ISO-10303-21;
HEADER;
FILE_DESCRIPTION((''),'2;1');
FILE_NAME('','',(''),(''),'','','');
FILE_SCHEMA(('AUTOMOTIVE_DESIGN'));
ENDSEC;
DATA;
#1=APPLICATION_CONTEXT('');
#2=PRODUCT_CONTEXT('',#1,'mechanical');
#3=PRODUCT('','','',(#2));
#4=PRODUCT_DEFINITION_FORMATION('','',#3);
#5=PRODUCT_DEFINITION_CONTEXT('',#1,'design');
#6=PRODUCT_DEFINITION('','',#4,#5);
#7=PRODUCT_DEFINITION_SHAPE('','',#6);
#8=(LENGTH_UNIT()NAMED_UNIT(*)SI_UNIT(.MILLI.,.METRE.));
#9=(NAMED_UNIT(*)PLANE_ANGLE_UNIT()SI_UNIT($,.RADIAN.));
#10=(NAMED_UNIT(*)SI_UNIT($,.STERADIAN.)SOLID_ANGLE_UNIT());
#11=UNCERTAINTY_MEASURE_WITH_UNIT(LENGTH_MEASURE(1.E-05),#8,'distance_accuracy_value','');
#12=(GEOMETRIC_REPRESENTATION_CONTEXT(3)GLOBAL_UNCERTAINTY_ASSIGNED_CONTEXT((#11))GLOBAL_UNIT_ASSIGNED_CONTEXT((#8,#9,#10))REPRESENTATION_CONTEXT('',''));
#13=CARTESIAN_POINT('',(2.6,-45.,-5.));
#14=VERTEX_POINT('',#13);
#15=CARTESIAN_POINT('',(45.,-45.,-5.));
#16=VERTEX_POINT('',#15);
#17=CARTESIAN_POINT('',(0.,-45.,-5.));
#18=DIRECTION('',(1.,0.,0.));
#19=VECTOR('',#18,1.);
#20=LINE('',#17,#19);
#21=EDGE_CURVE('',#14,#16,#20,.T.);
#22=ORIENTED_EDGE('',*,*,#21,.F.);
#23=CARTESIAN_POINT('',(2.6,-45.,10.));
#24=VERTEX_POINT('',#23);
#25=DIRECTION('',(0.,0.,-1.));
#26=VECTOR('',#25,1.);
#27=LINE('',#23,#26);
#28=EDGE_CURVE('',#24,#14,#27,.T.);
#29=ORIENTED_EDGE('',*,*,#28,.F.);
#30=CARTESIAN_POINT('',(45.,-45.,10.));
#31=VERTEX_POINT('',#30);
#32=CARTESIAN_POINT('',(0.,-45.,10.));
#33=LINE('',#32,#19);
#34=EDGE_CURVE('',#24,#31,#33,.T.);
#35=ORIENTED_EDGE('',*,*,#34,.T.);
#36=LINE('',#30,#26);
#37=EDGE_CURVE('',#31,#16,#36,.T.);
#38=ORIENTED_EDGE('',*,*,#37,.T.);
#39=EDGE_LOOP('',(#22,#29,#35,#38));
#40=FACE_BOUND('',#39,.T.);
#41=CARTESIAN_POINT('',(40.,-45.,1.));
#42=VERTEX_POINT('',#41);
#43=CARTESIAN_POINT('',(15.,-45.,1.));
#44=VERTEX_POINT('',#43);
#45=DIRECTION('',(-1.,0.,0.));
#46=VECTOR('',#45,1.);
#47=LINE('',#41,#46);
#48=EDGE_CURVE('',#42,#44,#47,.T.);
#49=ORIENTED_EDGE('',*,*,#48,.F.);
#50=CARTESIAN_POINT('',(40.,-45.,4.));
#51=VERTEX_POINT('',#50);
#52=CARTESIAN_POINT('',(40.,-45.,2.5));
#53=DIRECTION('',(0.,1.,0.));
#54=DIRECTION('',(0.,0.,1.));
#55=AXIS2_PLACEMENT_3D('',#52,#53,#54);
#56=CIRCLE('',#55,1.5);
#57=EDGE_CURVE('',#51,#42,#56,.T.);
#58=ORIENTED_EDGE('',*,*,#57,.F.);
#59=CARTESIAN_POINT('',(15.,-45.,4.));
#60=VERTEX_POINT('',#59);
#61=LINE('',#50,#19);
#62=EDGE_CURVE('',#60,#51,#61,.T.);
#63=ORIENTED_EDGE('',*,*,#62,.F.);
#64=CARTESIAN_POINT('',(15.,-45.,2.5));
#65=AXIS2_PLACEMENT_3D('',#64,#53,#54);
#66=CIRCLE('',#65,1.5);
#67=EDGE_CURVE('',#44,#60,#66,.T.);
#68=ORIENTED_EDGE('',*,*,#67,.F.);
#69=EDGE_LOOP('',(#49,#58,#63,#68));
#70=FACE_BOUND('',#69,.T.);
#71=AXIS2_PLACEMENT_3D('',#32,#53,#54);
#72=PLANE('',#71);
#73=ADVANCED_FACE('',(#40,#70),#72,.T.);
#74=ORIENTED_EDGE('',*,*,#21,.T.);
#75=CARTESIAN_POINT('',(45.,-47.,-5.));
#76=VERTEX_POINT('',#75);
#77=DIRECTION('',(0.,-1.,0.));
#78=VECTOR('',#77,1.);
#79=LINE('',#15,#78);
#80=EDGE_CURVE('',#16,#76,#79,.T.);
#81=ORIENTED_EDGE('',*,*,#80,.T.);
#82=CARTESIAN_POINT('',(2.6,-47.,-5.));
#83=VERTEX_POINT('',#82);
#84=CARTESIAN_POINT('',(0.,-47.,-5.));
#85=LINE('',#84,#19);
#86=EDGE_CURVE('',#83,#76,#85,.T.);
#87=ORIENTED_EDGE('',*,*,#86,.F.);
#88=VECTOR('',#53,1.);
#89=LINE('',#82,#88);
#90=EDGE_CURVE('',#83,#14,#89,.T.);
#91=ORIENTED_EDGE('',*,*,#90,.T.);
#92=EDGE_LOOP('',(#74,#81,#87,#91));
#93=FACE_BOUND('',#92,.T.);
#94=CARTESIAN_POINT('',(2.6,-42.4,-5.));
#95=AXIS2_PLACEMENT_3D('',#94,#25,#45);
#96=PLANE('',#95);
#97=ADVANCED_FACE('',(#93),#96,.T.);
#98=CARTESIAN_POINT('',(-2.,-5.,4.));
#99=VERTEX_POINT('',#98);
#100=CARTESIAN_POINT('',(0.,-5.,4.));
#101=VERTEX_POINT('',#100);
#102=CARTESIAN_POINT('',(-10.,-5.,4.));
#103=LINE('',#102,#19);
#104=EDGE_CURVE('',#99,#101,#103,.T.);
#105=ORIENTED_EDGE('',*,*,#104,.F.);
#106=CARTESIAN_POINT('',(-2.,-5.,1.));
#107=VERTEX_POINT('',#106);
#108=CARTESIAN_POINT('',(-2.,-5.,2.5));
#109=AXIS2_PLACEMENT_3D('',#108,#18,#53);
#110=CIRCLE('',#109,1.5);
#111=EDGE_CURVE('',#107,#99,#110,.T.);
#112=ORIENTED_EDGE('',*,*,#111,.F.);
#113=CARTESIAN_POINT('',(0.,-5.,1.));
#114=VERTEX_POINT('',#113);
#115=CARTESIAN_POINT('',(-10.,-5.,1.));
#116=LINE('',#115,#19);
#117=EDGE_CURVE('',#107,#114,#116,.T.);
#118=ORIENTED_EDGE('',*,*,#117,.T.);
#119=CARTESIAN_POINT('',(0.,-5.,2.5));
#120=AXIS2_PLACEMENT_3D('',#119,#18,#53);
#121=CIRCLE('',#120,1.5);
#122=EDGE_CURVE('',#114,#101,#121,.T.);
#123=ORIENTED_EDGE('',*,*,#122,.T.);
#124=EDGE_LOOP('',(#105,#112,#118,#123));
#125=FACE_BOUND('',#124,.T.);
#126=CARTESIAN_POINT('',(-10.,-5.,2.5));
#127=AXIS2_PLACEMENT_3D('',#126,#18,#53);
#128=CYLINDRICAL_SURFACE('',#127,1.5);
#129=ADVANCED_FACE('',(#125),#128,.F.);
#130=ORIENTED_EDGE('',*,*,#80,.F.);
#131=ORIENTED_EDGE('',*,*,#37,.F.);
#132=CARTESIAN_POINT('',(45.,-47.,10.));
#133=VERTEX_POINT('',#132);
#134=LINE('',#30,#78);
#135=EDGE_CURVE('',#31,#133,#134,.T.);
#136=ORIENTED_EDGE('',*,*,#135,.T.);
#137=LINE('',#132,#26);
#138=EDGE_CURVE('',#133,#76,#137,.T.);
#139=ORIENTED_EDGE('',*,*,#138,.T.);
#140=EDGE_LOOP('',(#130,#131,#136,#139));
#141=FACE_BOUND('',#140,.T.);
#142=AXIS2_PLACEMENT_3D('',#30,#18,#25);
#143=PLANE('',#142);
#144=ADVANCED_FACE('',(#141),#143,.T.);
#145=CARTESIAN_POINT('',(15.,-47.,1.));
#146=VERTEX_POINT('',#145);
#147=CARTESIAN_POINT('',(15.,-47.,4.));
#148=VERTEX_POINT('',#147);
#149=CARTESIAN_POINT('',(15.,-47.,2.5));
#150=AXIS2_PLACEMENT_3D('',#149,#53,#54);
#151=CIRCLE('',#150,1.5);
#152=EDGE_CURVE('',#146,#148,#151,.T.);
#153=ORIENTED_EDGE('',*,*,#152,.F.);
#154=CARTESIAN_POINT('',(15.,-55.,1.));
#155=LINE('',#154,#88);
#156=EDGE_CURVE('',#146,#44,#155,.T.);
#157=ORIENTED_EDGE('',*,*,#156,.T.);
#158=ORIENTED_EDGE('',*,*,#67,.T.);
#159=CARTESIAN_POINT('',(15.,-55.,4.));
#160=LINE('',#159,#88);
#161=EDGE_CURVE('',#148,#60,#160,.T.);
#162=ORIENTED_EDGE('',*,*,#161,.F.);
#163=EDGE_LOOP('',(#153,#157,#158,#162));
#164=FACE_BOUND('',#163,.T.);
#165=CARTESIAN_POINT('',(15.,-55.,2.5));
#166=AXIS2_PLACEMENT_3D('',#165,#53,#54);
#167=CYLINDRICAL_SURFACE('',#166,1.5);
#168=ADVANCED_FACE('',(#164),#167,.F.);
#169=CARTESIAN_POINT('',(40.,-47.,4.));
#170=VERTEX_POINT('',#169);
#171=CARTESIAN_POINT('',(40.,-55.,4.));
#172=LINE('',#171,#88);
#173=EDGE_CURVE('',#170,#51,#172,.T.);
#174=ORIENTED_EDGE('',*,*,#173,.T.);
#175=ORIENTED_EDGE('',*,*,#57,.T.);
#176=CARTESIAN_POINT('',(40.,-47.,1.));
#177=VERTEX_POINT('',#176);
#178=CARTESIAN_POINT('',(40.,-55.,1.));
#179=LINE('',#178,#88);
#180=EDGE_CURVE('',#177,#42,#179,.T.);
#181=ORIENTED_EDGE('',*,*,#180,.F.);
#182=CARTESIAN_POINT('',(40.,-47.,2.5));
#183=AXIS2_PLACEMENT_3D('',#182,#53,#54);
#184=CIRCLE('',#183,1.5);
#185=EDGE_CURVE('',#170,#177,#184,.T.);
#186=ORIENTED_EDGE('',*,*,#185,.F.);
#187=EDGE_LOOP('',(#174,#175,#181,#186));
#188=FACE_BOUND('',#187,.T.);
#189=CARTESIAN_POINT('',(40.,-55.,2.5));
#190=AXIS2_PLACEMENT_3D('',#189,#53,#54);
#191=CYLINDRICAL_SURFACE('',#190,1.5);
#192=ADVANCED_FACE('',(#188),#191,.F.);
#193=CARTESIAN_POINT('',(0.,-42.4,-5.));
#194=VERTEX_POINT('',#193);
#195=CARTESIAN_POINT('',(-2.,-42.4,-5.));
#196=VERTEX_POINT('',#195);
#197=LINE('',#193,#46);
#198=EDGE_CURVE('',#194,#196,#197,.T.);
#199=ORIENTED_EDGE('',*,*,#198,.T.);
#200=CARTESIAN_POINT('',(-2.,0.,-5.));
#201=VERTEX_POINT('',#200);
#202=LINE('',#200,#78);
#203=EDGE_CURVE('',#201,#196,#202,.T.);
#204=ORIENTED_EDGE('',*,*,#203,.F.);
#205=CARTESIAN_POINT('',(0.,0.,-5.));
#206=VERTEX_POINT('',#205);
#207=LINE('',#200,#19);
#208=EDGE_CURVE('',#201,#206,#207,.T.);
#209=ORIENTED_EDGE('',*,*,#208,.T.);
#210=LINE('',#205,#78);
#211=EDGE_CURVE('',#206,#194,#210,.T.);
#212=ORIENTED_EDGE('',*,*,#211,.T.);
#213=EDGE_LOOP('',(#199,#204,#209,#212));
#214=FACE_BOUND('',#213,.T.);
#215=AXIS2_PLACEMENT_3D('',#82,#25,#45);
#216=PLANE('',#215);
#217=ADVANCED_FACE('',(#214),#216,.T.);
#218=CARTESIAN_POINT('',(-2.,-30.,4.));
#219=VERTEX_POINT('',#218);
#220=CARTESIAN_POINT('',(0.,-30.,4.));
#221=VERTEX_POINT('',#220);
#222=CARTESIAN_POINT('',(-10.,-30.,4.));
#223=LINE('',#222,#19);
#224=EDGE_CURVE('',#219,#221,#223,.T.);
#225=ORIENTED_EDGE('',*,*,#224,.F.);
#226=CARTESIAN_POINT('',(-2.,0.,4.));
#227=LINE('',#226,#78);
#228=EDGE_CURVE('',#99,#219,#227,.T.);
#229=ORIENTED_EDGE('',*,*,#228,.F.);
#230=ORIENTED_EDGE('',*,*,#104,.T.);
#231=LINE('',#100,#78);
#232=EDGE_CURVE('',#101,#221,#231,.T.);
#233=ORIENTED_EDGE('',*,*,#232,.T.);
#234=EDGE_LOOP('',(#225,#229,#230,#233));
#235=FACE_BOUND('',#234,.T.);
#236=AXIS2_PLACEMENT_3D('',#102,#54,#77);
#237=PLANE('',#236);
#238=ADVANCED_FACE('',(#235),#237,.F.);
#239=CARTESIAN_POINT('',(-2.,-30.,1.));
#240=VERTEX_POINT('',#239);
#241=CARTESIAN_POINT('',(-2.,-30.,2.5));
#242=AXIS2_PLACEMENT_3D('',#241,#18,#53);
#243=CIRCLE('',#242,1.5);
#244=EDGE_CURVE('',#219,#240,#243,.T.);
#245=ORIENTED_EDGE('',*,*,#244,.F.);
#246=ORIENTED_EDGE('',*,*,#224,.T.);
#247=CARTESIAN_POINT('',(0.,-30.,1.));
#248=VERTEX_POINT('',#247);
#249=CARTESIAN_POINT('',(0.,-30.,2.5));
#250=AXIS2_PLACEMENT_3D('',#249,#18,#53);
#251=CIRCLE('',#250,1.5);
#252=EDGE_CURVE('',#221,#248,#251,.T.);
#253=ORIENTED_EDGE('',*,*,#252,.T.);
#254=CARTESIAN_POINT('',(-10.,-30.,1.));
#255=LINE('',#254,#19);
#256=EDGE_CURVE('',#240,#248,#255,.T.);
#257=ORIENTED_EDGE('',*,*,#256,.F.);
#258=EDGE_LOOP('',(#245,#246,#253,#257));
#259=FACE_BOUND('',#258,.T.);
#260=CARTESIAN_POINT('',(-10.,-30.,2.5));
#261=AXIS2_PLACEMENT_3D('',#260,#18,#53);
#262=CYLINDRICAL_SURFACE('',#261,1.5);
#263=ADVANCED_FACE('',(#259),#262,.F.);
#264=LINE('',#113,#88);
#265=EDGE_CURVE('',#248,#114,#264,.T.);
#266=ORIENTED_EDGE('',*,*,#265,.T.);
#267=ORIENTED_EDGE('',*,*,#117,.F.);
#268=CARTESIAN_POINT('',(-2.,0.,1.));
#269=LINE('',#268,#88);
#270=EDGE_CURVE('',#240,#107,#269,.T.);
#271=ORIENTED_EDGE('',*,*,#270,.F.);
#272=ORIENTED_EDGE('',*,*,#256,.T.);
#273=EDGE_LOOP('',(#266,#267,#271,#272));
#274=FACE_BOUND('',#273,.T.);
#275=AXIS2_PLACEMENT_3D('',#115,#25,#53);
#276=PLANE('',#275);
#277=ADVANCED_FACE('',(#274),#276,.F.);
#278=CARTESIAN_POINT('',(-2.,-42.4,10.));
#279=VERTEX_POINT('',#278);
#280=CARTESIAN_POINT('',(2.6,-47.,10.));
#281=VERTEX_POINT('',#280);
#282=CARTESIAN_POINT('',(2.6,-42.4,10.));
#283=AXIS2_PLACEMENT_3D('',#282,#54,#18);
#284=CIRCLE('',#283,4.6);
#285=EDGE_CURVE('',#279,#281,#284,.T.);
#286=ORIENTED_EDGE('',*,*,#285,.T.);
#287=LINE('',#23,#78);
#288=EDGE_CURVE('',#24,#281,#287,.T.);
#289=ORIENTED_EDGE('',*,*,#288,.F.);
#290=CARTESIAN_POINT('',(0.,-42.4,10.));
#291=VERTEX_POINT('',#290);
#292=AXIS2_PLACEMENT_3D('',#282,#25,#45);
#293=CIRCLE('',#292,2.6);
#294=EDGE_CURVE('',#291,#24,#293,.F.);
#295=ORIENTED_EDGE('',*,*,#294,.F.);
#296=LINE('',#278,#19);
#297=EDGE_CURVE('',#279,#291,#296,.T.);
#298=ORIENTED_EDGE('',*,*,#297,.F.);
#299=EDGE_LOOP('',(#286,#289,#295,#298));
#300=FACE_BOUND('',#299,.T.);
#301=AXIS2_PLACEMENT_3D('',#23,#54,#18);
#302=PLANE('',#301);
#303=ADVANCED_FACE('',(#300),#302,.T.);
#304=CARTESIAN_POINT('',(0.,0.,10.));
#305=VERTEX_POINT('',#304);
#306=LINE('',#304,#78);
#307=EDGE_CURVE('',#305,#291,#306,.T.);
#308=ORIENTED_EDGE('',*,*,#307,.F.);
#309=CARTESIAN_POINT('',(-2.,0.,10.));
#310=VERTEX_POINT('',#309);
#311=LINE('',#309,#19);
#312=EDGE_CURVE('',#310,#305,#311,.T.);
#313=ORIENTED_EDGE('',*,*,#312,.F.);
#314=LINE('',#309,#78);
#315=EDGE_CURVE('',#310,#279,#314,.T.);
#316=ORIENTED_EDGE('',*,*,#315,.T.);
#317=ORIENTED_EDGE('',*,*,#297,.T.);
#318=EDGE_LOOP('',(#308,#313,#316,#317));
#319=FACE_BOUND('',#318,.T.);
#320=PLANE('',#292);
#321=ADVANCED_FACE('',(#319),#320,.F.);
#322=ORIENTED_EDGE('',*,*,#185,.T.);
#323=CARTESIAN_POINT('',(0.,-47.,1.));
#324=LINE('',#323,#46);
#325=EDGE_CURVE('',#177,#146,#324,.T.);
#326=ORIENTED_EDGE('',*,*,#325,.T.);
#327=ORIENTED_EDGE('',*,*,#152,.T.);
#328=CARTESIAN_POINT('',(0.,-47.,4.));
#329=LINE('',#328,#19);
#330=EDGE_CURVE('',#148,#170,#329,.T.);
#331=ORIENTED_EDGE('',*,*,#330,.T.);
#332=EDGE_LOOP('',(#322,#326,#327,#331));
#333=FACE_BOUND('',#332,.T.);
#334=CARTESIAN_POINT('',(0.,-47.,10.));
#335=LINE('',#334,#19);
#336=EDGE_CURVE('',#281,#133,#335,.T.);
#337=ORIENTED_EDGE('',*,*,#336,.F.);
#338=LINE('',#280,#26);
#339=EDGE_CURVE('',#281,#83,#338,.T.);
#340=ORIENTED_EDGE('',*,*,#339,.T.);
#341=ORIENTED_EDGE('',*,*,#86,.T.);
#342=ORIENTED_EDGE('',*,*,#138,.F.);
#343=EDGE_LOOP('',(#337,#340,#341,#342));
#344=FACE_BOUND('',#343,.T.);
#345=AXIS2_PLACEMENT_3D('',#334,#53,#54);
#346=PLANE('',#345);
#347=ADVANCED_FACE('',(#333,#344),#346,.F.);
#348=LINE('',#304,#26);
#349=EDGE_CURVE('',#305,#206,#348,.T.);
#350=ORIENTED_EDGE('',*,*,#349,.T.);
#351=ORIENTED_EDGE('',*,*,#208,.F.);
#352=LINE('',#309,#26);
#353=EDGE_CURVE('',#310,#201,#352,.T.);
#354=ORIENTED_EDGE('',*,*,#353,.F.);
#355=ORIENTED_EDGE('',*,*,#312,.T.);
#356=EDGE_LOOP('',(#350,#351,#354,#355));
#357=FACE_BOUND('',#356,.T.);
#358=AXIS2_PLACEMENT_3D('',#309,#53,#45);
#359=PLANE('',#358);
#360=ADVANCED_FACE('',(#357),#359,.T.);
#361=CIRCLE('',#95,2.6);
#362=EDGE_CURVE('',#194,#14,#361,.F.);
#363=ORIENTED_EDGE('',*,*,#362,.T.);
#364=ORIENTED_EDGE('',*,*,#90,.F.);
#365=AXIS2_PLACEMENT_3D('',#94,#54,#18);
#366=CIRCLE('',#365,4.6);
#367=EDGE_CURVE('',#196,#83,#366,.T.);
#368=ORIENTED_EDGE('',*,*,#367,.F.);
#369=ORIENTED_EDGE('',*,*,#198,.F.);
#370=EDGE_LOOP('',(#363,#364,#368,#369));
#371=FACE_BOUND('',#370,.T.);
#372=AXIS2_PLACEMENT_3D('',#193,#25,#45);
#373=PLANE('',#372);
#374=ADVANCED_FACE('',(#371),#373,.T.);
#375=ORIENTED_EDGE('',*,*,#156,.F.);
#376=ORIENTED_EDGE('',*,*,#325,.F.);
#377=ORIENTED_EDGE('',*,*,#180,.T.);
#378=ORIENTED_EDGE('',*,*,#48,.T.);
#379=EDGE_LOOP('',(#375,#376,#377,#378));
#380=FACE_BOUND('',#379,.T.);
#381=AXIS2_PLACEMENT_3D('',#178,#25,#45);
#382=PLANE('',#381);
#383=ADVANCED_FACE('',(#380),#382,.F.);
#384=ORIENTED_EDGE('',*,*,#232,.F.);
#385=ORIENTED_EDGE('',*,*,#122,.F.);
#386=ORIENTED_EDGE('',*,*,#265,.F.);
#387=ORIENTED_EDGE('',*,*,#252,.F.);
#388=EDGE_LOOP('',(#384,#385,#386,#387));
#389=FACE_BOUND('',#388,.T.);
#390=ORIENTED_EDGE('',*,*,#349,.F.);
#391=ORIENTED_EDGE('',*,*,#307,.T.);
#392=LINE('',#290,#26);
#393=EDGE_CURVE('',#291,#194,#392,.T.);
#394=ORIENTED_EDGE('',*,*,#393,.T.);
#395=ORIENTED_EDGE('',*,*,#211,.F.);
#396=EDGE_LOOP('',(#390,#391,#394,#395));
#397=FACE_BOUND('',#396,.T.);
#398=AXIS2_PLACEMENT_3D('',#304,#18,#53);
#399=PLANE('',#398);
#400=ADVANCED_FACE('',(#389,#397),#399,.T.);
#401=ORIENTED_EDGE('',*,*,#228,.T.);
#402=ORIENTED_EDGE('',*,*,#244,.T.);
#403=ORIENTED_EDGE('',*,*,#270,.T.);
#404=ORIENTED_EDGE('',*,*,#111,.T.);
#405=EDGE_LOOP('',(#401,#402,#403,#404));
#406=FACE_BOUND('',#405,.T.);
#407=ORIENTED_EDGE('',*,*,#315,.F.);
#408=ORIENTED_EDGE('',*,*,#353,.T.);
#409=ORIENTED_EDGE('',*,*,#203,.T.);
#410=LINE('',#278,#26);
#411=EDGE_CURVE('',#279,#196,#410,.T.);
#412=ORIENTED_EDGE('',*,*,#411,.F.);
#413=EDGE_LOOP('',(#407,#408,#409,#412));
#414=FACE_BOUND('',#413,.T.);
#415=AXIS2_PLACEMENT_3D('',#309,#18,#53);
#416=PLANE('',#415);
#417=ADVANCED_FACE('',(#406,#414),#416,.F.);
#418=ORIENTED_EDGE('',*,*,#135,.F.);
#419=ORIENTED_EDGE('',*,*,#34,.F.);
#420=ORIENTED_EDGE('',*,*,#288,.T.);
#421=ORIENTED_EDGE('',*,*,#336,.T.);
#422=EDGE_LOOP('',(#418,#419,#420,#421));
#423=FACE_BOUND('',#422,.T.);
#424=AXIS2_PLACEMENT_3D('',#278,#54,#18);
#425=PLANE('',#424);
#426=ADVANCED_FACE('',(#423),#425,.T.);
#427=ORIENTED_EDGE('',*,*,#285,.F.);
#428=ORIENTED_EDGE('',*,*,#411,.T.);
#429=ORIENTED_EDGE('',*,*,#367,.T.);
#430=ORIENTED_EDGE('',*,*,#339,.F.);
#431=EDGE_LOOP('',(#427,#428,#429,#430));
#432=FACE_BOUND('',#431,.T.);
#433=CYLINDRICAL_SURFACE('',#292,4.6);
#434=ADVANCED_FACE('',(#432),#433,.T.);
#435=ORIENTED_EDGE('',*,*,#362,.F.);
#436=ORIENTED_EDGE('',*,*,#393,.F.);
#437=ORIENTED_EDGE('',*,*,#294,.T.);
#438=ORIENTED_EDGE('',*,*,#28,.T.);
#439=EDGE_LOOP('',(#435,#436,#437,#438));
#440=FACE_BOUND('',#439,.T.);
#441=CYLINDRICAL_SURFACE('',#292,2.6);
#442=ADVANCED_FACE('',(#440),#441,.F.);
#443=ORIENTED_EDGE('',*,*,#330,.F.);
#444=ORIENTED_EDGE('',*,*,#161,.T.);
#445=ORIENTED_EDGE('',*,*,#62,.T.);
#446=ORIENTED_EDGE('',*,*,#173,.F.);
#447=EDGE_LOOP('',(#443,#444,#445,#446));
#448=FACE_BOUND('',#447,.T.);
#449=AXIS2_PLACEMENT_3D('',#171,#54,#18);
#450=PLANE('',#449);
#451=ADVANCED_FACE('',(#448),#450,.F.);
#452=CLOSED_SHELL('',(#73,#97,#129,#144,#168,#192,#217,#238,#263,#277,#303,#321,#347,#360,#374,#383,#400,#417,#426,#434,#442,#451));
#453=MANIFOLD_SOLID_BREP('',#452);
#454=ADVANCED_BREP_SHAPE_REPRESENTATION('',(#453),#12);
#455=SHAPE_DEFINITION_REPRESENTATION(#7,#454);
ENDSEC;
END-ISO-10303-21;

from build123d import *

# Parameters (mm, degrees)
BASE_FLANGE1_DEPTH      = 10
BASE_FLANGE1_DEPTH_BACK = 5
CUT_EXTRUDE1_DEPTH      = 10
CUT_EXTRUDE2_DEPTH      = 10


# Sheet-metal steps are written as plain solids
with BuildPart() as part:
    # Sketch1 → Base-Flange1 (new, two sides: drawn at the far end of the back side and taken through both)
    with BuildSketch(Plane.XY.offset(-BASE_FLANGE1_DEPTH_BACK)):
        with BuildLine():
            Line((0, 0), (0, -42.4))
            ThreePointArc((0, -42.4), (0.761522369, -44.238477631), (2.6, -45))
            Line((2.6, -45), (45, -45))
            Line((45, -45), (45, -47))
            Line((45, -47), (2.6, -47))
            ThreePointArc((2.6, -47), (-0.652691193, -45.652691193), (-2, -42.4))
            Line((-2, -42.4), (-2, 0))
            Line((-2, 0), (0, 0))
        make_face()
    extrude(amount=BASE_FLANGE1_DEPTH + BASE_FLANGE1_DEPTH_BACK)

    # Sketch6 → Cut-Extrude1 (cut)
    with BuildSketch(Plane(origin=(0, 0, 0), x_dir=(0, 0, -1), z_dir=(1, 0, 0))):
        with BuildLine():
            Line((-1, -5), (-1, -30))
            ThreePointArc((-1, -30), (-2.5, -31.5), (-4, -30))
            Line((-4, -30), (-4, -5))
            ThreePointArc((-4, -5), (-2.5, -3.5), (-1, -5))
        make_face()
    extrude(amount=-CUT_EXTRUDE1_DEPTH, mode=Mode.SUBTRACT)

    # Sketch7 → Cut-Extrude2 (cut)
    with BuildSketch(Plane(origin=(0, -45, 0), x_dir=(1, 0, 0), z_dir=(0, 1, 0))):
        with BuildLine():
            Line((40, -4), (15, -4))
            ThreePointArc((15, -4), (13.5, -2.5), (15, -1))
            Line((15, -1), (40, -1))
            ThreePointArc((40, -1), (41.5, -2.5), (40, -4))
        make_face()
    extrude(amount=-CUT_EXTRUDE2_DEPTH, mode=Mode.SUBTRACT)


solid = part.part
